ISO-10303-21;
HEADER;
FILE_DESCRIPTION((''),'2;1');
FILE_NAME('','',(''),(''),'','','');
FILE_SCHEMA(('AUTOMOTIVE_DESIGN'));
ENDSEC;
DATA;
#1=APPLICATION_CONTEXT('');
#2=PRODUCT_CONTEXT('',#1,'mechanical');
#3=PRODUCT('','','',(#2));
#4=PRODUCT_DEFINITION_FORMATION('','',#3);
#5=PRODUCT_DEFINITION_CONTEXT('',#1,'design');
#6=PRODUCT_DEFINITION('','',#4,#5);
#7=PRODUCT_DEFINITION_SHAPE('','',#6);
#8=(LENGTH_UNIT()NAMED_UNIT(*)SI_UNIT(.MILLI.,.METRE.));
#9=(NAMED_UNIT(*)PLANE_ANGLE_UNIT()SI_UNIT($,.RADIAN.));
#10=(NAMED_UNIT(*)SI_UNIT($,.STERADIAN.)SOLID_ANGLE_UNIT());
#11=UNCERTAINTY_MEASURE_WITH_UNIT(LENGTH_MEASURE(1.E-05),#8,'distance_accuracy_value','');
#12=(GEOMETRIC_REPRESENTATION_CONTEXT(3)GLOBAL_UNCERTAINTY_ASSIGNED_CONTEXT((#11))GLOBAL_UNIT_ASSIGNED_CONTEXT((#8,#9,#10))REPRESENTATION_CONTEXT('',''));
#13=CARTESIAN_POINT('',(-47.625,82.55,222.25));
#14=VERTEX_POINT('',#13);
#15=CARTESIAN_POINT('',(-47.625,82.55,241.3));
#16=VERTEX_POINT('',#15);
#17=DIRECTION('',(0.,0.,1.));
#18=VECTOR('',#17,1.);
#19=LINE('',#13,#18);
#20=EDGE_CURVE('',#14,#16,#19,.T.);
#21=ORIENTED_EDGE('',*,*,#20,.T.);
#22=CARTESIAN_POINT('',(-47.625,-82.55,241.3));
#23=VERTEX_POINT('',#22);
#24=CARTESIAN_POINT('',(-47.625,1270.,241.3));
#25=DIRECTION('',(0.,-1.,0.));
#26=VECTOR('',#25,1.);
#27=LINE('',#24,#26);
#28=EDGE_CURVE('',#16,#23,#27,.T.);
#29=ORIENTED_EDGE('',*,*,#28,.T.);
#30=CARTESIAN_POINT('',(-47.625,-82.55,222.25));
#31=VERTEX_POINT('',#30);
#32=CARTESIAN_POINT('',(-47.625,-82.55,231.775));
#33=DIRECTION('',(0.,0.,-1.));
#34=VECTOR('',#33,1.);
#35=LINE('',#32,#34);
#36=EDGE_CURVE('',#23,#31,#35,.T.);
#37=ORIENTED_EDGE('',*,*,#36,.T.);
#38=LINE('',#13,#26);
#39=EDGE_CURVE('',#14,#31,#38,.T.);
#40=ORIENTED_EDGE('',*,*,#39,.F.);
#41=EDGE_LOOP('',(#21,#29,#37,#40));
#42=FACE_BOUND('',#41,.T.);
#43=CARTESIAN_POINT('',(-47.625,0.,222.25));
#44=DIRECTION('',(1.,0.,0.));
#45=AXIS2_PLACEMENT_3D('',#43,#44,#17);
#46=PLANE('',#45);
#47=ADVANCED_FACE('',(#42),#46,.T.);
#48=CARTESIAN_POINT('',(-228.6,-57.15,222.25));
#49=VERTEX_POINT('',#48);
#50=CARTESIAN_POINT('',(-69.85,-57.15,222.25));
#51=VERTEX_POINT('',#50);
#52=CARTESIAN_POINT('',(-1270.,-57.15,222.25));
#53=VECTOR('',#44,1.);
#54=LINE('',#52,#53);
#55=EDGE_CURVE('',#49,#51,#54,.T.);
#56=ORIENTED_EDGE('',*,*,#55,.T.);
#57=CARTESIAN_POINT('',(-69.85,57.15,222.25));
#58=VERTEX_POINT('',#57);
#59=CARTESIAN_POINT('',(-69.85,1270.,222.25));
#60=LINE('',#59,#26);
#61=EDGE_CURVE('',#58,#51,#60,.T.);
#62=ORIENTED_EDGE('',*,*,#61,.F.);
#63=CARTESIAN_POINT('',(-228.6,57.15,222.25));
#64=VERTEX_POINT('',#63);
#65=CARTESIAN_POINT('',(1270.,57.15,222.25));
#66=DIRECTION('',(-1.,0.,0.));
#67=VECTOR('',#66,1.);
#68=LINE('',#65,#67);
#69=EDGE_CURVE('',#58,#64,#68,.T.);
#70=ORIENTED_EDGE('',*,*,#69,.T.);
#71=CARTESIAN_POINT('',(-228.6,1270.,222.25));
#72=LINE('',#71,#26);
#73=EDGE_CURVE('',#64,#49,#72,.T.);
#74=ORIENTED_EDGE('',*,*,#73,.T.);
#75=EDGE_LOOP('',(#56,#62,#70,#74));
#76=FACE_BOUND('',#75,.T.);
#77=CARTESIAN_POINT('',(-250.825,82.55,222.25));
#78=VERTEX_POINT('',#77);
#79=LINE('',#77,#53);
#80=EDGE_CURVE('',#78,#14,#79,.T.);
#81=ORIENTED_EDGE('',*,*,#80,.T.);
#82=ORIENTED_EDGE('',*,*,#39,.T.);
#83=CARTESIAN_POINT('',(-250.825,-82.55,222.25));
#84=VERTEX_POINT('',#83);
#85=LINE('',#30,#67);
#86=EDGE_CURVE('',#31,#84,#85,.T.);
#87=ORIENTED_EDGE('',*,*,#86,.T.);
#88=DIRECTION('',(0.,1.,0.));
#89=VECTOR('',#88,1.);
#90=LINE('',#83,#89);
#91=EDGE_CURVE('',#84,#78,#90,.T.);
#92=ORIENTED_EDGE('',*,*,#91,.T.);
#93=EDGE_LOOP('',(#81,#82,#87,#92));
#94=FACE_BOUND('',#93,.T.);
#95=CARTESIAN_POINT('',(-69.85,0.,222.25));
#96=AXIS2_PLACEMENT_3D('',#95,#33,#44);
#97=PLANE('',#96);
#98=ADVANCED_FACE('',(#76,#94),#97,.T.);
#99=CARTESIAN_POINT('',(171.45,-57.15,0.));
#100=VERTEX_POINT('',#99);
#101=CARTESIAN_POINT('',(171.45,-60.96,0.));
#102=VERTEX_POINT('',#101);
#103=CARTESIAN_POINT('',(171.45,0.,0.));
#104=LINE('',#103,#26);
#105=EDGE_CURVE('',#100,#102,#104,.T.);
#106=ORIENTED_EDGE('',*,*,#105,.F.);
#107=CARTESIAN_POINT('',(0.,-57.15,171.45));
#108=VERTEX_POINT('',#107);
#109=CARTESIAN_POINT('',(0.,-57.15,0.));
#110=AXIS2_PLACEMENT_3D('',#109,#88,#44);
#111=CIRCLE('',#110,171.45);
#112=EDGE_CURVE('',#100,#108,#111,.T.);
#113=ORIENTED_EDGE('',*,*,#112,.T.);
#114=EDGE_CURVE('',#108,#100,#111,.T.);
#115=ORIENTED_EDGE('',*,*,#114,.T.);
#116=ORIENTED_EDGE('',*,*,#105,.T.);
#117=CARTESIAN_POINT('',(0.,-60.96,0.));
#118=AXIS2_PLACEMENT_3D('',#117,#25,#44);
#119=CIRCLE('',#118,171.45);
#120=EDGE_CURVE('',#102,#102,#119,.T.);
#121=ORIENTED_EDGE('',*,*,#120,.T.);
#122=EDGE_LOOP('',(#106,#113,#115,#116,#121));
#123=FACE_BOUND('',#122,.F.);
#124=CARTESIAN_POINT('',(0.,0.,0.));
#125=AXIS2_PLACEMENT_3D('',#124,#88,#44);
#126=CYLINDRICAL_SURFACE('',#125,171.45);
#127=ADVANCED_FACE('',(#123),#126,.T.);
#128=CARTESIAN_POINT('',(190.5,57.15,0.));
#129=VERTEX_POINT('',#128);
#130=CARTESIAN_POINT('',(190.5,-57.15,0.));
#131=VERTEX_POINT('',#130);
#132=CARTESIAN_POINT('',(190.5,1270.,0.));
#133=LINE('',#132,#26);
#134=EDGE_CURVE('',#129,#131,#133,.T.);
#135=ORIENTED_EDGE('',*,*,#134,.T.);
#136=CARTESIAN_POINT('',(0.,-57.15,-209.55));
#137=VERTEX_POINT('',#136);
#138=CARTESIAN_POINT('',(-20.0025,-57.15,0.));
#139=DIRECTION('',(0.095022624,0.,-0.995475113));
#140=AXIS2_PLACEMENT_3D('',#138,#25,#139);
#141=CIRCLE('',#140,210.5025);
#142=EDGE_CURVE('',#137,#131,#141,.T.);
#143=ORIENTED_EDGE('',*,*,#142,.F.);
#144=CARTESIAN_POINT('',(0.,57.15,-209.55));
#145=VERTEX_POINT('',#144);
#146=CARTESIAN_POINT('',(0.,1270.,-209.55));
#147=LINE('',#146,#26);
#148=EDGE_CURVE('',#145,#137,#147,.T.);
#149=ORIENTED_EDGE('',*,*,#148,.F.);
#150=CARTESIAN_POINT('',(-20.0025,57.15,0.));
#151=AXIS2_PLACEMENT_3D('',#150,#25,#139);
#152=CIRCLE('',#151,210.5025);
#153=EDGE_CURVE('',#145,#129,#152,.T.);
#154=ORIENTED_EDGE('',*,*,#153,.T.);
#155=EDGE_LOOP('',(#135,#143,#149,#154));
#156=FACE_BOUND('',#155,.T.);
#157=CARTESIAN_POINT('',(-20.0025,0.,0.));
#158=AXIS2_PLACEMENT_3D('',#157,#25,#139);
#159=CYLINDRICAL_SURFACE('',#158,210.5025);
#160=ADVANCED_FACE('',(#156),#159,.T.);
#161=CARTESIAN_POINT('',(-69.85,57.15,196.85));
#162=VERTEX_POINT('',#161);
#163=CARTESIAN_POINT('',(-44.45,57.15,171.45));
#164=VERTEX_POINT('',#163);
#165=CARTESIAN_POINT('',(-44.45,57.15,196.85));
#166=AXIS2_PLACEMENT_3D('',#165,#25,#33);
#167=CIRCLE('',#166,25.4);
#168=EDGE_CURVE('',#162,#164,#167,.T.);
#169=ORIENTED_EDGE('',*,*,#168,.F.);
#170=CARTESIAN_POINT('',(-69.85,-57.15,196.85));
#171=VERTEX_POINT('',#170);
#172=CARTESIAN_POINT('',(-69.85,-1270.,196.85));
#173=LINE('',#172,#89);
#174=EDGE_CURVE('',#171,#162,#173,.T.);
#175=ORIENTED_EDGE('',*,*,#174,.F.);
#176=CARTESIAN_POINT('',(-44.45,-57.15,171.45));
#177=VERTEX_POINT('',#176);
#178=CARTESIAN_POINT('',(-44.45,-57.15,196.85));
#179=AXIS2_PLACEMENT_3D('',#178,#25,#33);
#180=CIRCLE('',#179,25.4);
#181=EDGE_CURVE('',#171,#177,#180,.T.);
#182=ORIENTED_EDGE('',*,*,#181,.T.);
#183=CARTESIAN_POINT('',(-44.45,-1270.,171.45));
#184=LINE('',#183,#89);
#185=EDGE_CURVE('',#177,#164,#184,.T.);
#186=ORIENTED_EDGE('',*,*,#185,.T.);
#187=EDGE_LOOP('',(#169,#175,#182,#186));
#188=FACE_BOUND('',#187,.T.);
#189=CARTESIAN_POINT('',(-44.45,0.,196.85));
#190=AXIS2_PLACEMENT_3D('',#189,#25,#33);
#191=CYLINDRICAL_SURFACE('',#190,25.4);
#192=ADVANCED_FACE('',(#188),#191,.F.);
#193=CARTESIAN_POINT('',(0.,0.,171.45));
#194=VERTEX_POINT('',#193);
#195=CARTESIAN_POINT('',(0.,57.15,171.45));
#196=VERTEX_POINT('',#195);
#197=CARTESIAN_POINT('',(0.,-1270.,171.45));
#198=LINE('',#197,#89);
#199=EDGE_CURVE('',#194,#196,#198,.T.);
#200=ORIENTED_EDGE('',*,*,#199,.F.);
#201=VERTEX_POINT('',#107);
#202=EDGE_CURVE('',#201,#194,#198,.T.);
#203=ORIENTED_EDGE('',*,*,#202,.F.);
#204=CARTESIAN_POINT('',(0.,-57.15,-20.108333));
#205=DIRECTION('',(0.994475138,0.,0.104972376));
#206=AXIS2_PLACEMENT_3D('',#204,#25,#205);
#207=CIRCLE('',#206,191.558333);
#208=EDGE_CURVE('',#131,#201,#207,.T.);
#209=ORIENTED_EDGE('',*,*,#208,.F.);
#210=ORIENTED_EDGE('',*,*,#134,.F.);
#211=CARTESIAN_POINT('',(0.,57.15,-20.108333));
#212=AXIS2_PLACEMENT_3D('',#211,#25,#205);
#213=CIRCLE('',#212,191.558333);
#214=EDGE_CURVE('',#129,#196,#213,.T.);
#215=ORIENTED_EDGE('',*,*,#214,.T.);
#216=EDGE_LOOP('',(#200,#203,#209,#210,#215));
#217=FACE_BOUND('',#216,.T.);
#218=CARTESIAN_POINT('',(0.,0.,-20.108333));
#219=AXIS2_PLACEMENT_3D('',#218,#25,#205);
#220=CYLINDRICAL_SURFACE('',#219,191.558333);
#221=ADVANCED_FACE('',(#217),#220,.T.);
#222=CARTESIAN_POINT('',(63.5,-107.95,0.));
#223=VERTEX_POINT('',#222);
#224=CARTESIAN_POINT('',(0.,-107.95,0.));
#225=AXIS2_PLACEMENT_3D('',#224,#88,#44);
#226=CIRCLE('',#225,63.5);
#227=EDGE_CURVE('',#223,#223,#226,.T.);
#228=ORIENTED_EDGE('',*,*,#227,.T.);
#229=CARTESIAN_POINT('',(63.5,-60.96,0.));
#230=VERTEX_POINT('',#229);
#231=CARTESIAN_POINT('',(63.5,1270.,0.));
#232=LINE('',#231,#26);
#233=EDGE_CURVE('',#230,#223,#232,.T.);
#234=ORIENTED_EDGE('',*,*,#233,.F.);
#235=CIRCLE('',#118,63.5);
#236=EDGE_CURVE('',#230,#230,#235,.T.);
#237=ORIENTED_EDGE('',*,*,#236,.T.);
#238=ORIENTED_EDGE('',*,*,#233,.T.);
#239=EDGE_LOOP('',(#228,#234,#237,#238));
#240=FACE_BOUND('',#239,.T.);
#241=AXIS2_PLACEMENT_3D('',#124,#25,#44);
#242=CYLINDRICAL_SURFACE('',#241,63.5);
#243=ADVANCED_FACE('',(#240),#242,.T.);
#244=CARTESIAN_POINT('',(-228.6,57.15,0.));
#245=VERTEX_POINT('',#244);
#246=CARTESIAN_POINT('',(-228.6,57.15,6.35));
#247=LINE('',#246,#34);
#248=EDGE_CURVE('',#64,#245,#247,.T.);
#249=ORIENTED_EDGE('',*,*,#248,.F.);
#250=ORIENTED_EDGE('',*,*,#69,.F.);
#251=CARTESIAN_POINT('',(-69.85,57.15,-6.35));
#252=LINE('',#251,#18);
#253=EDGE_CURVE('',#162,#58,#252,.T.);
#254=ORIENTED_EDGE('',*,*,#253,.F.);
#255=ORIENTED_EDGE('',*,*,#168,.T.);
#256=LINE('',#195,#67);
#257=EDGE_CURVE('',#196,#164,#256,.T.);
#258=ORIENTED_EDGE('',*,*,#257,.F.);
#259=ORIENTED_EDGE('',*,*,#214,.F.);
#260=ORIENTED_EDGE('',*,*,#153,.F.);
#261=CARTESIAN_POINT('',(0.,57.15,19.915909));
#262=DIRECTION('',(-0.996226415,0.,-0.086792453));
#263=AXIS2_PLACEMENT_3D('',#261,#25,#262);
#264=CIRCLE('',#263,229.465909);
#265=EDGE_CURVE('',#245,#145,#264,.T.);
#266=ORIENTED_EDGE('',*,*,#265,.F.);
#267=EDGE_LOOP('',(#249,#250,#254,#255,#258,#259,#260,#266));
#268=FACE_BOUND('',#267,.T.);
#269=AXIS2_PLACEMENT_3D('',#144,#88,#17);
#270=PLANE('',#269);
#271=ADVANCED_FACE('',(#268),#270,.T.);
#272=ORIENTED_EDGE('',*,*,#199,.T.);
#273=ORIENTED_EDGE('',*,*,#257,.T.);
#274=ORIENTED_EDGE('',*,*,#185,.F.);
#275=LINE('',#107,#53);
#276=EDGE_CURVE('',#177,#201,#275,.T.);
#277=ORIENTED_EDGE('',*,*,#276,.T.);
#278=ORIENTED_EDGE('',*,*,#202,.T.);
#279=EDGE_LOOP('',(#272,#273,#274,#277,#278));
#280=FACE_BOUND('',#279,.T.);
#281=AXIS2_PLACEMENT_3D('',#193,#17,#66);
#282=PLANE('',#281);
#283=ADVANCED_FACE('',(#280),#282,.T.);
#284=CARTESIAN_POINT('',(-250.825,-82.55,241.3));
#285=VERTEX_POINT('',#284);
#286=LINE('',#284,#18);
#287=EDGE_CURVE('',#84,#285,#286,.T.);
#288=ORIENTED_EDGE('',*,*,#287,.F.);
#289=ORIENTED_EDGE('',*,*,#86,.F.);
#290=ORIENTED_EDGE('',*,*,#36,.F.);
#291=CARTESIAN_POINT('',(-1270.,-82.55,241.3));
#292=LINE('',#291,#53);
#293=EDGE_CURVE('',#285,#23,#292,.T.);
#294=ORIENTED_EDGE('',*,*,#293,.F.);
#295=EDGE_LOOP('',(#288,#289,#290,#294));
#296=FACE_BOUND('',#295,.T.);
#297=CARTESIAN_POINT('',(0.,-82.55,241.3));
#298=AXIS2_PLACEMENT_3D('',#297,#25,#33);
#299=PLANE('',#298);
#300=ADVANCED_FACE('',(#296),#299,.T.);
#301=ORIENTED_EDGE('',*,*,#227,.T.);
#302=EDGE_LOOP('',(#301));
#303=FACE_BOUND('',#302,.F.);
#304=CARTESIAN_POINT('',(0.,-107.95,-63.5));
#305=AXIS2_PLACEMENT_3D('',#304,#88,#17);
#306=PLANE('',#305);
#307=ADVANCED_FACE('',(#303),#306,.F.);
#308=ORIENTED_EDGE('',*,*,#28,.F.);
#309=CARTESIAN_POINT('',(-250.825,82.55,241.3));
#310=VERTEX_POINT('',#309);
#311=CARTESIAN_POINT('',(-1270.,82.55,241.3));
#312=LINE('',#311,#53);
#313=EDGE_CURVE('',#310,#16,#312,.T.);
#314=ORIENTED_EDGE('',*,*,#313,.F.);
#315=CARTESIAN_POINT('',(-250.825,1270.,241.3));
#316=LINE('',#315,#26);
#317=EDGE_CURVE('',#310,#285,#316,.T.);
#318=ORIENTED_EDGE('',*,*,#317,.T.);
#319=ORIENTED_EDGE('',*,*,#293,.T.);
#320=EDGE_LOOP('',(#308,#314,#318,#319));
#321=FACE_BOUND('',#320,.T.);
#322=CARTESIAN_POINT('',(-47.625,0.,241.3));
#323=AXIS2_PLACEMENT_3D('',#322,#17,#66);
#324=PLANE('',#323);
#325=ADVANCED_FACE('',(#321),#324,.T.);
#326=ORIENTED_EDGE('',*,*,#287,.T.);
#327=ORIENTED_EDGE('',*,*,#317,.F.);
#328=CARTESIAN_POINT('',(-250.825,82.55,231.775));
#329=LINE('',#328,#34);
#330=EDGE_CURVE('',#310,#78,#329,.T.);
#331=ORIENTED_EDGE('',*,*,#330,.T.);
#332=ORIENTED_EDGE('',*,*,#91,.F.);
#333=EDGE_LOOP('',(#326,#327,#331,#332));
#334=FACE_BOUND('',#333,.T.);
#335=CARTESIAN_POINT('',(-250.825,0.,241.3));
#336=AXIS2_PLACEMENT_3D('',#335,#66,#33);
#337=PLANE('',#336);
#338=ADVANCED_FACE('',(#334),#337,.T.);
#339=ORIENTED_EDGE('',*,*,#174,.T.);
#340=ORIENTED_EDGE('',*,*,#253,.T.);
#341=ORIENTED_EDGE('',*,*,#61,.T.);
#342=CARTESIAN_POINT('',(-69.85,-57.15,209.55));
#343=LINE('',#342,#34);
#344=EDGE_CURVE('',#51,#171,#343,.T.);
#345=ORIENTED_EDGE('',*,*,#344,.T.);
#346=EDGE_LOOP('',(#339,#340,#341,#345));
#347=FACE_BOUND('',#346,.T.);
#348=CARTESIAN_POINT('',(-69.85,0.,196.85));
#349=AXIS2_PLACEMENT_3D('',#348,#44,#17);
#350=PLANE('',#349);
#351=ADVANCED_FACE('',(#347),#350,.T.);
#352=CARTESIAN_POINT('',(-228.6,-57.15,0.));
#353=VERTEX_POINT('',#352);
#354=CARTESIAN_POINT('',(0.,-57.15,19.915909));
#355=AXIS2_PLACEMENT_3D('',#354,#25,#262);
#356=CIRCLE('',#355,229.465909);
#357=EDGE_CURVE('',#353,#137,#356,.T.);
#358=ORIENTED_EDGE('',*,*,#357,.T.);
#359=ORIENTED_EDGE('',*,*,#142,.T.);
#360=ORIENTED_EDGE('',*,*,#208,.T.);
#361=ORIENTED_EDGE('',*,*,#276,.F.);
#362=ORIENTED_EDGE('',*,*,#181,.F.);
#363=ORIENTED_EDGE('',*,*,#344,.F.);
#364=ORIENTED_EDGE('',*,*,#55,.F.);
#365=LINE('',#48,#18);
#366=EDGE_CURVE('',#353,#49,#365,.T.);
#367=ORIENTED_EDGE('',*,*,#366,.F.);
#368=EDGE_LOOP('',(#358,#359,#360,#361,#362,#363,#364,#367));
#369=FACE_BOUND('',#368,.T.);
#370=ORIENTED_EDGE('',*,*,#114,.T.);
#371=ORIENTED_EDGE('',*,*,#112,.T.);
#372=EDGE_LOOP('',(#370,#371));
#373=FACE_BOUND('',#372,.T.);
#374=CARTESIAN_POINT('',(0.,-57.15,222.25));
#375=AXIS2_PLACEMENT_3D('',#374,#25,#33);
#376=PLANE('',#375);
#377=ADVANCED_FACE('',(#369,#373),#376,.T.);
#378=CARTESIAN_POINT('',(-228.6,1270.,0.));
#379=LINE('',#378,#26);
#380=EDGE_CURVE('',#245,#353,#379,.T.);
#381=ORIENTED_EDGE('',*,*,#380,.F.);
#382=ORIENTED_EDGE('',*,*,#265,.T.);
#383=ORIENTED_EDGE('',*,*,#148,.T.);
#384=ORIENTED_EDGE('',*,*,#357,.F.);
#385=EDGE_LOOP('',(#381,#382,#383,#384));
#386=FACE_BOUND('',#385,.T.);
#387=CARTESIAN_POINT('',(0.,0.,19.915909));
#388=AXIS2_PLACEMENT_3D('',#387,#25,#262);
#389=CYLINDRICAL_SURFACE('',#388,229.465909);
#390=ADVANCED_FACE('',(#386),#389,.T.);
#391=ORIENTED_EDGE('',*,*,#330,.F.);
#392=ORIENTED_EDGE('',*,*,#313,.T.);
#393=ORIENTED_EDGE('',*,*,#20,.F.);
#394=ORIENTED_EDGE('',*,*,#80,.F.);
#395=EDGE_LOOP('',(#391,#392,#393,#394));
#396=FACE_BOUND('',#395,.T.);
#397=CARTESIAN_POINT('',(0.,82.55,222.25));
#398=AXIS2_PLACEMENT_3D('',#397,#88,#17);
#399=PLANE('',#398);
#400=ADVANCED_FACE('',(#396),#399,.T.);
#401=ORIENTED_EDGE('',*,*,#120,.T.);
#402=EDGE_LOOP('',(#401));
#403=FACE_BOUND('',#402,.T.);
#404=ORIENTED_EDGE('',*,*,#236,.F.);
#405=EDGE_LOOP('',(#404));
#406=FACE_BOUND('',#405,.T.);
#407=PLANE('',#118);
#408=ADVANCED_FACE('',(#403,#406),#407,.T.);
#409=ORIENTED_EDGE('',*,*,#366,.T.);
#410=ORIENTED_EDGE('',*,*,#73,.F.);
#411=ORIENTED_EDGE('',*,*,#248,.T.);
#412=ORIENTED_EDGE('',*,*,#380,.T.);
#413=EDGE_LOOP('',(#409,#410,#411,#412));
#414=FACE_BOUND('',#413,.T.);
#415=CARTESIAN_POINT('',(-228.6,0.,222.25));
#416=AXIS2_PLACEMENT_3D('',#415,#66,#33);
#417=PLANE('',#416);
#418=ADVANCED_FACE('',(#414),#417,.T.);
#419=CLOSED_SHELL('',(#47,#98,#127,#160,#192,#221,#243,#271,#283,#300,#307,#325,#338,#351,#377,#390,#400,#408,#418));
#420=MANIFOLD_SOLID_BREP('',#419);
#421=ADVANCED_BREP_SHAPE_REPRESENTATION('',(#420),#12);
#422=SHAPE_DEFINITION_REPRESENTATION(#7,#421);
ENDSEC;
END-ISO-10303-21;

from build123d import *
from build123d import SkipClean  # not in build123d's __all__

# Parameters (mm, degrees)
F0_R     = 63.5
F2_DEPTH = 1270
F3_DEPTH = 1270
F4_DEPTH = 1270
F1_W     = 50.8
F1_H     = 127
F5_DEPTH = 1270
F6_DEPTH = 60.96


with BuildPart() as f2:
    # F0 (on Front) → F2 (new body, symmetric)
    with BuildSketch(Plane.XZ):
        Polygon((-228.6, 222.25), (-69.85, 222.25), (-47.625, 222.25), (-47.625, 241.3), (-250.825, 241.3), (-250.825, 222.25), align=None)
        with BuildLine():
            ThreePointArc((190.5, 0), (128.1457690484, 122.2758544982), (0, 171.45))
            Line((0, 171.45), (-44.45, 171.45))
            ThreePointArc((-44.45, 171.45), (-62.4105122421, 178.8894877579), (-69.85, 196.85))
            Line((-69.85, 196.85), (-69.85, 222.25))
            Line((-69.85, 222.25), (-228.6, 222.25))
            Line((-228.6, 222.25), (-228.6, 0))
            ThreePointArc((-228.6, 0), (-155.0557661778, -149.2358358304), (0, -209.55))
            ThreePointArc((0, -209.55), (135.7567353, -141.5993048182), (190.5, 0))
        make_face()
        with BuildLine():
            ThreePointArc((0, 171.45), (121.2334576344, 121.2334576344), (171.45, 0))
            ThreePointArc((171.45, 0), (-121.2334576344, -121.2334576344), (0, 171.45))
        make_face(mode=Mode.SUBTRACT)
        with BuildLine():
            ThreePointArc((0, 171.45), (-121.2334576344, -121.2334576344), (171.45, 0))
            ThreePointArc((171.45, 0), (121.2334576344, 121.2334576344), (0, 171.45))
        make_face()
        Circle(F0_R, mode=Mode.SUBTRACT)
        Circle(F0_R)
    extrude(amount=F2_DEPTH, both=True)

    # F1 (on Right) → F3 (intersect, symmetric)
    with BuildSketch(Plane.YZ):
        Polygon((-57.15, 222.25), (57.15, 222.25), (82.55, 222.25), (82.55, 241.3), (-82.55, 241.3), (-82.55, 222.25), align=None)
        Polygon((-57.15, -63.5), (-57.15, -209.55), (57.15, -209.55), (57.15, 222.25), (-57.15, 222.25), (-57.15, 63.5), align=None)
    extrude(amount=F3_DEPTH, both=True, mode=Mode.INTERSECT)



with BuildPart() as f4:
    # F0 (on Front) → F4 (new body, symmetric)
    with BuildSketch(Plane.XZ):
        Circle(F0_R)
    extrude(amount=F4_DEPTH, both=True)

    # F1 (on Right) → F5 (intersect, symmetric)
    with BuildSketch(Plane.YZ):
        with Locations((-82.55, 0)):
            Rectangle(F1_W, F1_H)
    extrude(amount=F5_DEPTH, both=True, mode=Mode.INTERSECT)


with BuildPart() as f2_1:
    add(f2.part, clean=False)

    with SkipClean():  # cleaning this boolean's faces spoils the solid; the shape is the same uncleaned
        add(f4.part)  # F6 merges F4
    # F0 (on Front) → F6 (join)
    with BuildSketch(Plane.XZ):
        with BuildLine():
            ThreePointArc((0, 171.45), (-121.2334576344, -121.2334576344), (171.45, 0))
            ThreePointArc((171.45, 0), (121.2334576344, 121.2334576344), (0, 171.45))
        make_face()
        Circle(F0_R, mode=Mode.SUBTRACT)
    with SkipClean():  # cleaning this boolean's faces spoils the solid; the shape is the same uncleaned
        extrude(amount=F6_DEPTH)


solid = f2_1.part
